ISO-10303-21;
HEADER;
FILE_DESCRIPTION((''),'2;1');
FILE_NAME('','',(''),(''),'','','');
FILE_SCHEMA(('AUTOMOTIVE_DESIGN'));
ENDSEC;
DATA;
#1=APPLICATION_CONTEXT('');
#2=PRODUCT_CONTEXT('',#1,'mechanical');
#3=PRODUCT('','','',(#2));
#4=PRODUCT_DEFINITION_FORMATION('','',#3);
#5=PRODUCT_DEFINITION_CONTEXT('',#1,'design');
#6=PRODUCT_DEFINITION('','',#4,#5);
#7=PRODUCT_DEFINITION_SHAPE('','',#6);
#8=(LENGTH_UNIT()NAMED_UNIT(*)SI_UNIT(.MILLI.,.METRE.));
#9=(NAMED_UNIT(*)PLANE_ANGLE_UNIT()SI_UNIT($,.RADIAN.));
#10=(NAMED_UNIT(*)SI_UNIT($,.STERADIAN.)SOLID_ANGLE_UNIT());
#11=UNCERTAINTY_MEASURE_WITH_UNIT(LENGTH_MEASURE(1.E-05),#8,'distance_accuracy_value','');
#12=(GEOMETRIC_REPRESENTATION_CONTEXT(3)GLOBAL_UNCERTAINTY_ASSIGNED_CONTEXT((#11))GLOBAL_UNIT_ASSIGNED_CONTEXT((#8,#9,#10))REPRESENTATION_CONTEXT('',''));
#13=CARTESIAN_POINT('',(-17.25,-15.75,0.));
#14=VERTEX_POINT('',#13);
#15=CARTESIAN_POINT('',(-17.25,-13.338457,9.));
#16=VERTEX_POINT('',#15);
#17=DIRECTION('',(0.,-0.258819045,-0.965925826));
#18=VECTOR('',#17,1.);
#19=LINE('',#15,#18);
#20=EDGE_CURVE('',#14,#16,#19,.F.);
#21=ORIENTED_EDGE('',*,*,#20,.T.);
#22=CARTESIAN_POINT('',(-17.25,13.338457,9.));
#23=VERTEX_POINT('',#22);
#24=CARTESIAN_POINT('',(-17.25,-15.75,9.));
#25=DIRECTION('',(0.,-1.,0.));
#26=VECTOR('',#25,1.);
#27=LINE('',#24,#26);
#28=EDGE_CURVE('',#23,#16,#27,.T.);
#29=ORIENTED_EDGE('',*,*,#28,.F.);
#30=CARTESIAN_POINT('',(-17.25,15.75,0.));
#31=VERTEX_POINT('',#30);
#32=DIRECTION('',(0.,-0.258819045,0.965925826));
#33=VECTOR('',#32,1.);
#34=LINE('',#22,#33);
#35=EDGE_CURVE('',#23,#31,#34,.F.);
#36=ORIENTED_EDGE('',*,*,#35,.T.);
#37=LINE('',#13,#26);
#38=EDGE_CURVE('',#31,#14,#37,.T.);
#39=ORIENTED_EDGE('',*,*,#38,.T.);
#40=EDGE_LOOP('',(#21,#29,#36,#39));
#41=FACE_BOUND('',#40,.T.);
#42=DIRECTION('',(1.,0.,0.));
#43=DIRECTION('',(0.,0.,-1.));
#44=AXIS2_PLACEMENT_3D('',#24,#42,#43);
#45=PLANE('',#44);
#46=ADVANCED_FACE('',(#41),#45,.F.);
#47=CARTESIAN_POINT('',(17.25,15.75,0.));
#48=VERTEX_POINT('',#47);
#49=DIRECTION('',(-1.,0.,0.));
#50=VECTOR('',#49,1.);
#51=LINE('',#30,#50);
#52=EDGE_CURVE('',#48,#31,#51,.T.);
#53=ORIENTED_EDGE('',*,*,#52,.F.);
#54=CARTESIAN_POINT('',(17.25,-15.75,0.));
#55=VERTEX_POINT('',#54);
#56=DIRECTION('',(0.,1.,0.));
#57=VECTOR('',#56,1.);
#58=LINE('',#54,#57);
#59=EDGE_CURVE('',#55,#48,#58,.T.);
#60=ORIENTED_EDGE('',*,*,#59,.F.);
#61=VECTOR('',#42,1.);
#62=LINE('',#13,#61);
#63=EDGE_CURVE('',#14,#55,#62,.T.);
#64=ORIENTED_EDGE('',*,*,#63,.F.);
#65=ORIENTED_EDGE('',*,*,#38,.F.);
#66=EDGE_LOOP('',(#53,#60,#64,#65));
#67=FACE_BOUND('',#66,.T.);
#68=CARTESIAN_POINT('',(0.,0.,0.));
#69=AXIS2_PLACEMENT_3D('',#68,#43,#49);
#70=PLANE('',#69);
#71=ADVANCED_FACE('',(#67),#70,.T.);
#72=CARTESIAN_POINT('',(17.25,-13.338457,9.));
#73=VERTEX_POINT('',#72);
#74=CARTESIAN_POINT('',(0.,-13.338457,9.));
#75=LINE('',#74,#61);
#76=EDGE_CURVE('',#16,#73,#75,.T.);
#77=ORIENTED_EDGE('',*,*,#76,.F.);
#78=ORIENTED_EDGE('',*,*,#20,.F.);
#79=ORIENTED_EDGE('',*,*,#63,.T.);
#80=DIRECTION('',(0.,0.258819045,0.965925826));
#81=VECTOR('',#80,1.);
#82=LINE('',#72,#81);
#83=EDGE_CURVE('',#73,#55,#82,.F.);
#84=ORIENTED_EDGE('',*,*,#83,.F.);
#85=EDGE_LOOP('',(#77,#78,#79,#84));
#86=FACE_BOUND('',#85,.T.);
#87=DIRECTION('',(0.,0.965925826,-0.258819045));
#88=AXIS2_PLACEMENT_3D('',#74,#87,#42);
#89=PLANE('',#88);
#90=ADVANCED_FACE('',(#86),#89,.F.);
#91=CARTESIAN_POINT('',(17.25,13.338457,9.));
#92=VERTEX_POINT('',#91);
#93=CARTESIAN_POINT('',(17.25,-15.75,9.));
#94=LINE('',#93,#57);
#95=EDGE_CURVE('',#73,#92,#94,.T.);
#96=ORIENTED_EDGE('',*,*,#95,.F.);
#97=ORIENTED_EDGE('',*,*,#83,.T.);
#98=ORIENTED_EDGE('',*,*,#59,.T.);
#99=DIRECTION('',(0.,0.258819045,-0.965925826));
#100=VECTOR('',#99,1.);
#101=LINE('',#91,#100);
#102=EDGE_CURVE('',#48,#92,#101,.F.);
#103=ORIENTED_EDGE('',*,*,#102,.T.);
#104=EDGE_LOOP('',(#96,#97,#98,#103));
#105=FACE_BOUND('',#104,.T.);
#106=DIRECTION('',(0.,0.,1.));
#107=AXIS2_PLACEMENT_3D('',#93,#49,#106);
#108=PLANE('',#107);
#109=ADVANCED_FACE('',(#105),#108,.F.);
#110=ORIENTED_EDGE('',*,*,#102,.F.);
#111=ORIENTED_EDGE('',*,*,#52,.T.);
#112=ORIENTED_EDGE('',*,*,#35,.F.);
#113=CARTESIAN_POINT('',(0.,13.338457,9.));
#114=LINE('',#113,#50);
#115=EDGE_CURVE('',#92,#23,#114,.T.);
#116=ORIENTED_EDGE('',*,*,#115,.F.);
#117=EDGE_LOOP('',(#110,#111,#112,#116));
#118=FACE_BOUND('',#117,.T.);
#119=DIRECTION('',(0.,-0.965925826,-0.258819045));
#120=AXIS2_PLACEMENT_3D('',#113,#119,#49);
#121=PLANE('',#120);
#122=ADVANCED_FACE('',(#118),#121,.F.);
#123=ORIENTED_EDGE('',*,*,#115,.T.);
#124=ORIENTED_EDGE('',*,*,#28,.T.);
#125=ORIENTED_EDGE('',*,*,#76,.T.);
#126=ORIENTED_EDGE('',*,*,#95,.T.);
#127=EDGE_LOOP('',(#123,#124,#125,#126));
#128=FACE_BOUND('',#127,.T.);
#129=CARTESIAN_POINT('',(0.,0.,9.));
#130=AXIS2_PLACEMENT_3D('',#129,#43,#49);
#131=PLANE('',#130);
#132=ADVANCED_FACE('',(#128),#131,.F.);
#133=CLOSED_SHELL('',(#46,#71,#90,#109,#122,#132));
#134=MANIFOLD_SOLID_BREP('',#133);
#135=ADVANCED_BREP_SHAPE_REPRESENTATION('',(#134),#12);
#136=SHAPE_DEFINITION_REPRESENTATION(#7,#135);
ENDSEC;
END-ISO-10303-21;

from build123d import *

# Parameters (mm, degrees)
ESBO_O1_W                = 34.5
ESBO_O1_H                = 31.5
RESSALTO_EXTRUS_O1_DEPTH = 9
CHANFRO1_SIZE            = 9
CHANFRO1_SIZE_2          = 2.411542732


with BuildPart() as part:
    # Esboço1 → Ressalto-extrusão1 (new body)
    with BuildSketch(Plane.XY):
        Rectangle(ESBO_O1_W, ESBO_O1_H)
    extrude(amount=RESSALTO_EXTRUS_O1_DEPTH)

    # Chanfro1
    # the kernel refuses this chamfer: 9, 2.411542732 mm, written as the material it takes off along each edge
    with BuildSketch(Plane(origin=(-40.620494132, -15.75, 9), x_dir=(0, -0.009967146577156494, -0.9999503267608394), z_dir=(1, 0, 0)), Plane(origin=(40.620494132, 15.75, 9), x_dir=(0, 0.009967146577156494, -0.9999503267608394), z_dir=(-1, 0, 0))) as chanfro1_piece_1:
        Polygon((CHANFRO1_SIZE * 0.999950326761, CHANFRO1_SIZE * 0.00996714657716), (-CHANFRO1_SIZE_2 * 0.00996714657666, CHANFRO1_SIZE_2 * 0.999950326711), (0, 0), align=None)
    extrude(amount=81.240988264, mode=Mode.SUBTRACT)


solid = part.part
